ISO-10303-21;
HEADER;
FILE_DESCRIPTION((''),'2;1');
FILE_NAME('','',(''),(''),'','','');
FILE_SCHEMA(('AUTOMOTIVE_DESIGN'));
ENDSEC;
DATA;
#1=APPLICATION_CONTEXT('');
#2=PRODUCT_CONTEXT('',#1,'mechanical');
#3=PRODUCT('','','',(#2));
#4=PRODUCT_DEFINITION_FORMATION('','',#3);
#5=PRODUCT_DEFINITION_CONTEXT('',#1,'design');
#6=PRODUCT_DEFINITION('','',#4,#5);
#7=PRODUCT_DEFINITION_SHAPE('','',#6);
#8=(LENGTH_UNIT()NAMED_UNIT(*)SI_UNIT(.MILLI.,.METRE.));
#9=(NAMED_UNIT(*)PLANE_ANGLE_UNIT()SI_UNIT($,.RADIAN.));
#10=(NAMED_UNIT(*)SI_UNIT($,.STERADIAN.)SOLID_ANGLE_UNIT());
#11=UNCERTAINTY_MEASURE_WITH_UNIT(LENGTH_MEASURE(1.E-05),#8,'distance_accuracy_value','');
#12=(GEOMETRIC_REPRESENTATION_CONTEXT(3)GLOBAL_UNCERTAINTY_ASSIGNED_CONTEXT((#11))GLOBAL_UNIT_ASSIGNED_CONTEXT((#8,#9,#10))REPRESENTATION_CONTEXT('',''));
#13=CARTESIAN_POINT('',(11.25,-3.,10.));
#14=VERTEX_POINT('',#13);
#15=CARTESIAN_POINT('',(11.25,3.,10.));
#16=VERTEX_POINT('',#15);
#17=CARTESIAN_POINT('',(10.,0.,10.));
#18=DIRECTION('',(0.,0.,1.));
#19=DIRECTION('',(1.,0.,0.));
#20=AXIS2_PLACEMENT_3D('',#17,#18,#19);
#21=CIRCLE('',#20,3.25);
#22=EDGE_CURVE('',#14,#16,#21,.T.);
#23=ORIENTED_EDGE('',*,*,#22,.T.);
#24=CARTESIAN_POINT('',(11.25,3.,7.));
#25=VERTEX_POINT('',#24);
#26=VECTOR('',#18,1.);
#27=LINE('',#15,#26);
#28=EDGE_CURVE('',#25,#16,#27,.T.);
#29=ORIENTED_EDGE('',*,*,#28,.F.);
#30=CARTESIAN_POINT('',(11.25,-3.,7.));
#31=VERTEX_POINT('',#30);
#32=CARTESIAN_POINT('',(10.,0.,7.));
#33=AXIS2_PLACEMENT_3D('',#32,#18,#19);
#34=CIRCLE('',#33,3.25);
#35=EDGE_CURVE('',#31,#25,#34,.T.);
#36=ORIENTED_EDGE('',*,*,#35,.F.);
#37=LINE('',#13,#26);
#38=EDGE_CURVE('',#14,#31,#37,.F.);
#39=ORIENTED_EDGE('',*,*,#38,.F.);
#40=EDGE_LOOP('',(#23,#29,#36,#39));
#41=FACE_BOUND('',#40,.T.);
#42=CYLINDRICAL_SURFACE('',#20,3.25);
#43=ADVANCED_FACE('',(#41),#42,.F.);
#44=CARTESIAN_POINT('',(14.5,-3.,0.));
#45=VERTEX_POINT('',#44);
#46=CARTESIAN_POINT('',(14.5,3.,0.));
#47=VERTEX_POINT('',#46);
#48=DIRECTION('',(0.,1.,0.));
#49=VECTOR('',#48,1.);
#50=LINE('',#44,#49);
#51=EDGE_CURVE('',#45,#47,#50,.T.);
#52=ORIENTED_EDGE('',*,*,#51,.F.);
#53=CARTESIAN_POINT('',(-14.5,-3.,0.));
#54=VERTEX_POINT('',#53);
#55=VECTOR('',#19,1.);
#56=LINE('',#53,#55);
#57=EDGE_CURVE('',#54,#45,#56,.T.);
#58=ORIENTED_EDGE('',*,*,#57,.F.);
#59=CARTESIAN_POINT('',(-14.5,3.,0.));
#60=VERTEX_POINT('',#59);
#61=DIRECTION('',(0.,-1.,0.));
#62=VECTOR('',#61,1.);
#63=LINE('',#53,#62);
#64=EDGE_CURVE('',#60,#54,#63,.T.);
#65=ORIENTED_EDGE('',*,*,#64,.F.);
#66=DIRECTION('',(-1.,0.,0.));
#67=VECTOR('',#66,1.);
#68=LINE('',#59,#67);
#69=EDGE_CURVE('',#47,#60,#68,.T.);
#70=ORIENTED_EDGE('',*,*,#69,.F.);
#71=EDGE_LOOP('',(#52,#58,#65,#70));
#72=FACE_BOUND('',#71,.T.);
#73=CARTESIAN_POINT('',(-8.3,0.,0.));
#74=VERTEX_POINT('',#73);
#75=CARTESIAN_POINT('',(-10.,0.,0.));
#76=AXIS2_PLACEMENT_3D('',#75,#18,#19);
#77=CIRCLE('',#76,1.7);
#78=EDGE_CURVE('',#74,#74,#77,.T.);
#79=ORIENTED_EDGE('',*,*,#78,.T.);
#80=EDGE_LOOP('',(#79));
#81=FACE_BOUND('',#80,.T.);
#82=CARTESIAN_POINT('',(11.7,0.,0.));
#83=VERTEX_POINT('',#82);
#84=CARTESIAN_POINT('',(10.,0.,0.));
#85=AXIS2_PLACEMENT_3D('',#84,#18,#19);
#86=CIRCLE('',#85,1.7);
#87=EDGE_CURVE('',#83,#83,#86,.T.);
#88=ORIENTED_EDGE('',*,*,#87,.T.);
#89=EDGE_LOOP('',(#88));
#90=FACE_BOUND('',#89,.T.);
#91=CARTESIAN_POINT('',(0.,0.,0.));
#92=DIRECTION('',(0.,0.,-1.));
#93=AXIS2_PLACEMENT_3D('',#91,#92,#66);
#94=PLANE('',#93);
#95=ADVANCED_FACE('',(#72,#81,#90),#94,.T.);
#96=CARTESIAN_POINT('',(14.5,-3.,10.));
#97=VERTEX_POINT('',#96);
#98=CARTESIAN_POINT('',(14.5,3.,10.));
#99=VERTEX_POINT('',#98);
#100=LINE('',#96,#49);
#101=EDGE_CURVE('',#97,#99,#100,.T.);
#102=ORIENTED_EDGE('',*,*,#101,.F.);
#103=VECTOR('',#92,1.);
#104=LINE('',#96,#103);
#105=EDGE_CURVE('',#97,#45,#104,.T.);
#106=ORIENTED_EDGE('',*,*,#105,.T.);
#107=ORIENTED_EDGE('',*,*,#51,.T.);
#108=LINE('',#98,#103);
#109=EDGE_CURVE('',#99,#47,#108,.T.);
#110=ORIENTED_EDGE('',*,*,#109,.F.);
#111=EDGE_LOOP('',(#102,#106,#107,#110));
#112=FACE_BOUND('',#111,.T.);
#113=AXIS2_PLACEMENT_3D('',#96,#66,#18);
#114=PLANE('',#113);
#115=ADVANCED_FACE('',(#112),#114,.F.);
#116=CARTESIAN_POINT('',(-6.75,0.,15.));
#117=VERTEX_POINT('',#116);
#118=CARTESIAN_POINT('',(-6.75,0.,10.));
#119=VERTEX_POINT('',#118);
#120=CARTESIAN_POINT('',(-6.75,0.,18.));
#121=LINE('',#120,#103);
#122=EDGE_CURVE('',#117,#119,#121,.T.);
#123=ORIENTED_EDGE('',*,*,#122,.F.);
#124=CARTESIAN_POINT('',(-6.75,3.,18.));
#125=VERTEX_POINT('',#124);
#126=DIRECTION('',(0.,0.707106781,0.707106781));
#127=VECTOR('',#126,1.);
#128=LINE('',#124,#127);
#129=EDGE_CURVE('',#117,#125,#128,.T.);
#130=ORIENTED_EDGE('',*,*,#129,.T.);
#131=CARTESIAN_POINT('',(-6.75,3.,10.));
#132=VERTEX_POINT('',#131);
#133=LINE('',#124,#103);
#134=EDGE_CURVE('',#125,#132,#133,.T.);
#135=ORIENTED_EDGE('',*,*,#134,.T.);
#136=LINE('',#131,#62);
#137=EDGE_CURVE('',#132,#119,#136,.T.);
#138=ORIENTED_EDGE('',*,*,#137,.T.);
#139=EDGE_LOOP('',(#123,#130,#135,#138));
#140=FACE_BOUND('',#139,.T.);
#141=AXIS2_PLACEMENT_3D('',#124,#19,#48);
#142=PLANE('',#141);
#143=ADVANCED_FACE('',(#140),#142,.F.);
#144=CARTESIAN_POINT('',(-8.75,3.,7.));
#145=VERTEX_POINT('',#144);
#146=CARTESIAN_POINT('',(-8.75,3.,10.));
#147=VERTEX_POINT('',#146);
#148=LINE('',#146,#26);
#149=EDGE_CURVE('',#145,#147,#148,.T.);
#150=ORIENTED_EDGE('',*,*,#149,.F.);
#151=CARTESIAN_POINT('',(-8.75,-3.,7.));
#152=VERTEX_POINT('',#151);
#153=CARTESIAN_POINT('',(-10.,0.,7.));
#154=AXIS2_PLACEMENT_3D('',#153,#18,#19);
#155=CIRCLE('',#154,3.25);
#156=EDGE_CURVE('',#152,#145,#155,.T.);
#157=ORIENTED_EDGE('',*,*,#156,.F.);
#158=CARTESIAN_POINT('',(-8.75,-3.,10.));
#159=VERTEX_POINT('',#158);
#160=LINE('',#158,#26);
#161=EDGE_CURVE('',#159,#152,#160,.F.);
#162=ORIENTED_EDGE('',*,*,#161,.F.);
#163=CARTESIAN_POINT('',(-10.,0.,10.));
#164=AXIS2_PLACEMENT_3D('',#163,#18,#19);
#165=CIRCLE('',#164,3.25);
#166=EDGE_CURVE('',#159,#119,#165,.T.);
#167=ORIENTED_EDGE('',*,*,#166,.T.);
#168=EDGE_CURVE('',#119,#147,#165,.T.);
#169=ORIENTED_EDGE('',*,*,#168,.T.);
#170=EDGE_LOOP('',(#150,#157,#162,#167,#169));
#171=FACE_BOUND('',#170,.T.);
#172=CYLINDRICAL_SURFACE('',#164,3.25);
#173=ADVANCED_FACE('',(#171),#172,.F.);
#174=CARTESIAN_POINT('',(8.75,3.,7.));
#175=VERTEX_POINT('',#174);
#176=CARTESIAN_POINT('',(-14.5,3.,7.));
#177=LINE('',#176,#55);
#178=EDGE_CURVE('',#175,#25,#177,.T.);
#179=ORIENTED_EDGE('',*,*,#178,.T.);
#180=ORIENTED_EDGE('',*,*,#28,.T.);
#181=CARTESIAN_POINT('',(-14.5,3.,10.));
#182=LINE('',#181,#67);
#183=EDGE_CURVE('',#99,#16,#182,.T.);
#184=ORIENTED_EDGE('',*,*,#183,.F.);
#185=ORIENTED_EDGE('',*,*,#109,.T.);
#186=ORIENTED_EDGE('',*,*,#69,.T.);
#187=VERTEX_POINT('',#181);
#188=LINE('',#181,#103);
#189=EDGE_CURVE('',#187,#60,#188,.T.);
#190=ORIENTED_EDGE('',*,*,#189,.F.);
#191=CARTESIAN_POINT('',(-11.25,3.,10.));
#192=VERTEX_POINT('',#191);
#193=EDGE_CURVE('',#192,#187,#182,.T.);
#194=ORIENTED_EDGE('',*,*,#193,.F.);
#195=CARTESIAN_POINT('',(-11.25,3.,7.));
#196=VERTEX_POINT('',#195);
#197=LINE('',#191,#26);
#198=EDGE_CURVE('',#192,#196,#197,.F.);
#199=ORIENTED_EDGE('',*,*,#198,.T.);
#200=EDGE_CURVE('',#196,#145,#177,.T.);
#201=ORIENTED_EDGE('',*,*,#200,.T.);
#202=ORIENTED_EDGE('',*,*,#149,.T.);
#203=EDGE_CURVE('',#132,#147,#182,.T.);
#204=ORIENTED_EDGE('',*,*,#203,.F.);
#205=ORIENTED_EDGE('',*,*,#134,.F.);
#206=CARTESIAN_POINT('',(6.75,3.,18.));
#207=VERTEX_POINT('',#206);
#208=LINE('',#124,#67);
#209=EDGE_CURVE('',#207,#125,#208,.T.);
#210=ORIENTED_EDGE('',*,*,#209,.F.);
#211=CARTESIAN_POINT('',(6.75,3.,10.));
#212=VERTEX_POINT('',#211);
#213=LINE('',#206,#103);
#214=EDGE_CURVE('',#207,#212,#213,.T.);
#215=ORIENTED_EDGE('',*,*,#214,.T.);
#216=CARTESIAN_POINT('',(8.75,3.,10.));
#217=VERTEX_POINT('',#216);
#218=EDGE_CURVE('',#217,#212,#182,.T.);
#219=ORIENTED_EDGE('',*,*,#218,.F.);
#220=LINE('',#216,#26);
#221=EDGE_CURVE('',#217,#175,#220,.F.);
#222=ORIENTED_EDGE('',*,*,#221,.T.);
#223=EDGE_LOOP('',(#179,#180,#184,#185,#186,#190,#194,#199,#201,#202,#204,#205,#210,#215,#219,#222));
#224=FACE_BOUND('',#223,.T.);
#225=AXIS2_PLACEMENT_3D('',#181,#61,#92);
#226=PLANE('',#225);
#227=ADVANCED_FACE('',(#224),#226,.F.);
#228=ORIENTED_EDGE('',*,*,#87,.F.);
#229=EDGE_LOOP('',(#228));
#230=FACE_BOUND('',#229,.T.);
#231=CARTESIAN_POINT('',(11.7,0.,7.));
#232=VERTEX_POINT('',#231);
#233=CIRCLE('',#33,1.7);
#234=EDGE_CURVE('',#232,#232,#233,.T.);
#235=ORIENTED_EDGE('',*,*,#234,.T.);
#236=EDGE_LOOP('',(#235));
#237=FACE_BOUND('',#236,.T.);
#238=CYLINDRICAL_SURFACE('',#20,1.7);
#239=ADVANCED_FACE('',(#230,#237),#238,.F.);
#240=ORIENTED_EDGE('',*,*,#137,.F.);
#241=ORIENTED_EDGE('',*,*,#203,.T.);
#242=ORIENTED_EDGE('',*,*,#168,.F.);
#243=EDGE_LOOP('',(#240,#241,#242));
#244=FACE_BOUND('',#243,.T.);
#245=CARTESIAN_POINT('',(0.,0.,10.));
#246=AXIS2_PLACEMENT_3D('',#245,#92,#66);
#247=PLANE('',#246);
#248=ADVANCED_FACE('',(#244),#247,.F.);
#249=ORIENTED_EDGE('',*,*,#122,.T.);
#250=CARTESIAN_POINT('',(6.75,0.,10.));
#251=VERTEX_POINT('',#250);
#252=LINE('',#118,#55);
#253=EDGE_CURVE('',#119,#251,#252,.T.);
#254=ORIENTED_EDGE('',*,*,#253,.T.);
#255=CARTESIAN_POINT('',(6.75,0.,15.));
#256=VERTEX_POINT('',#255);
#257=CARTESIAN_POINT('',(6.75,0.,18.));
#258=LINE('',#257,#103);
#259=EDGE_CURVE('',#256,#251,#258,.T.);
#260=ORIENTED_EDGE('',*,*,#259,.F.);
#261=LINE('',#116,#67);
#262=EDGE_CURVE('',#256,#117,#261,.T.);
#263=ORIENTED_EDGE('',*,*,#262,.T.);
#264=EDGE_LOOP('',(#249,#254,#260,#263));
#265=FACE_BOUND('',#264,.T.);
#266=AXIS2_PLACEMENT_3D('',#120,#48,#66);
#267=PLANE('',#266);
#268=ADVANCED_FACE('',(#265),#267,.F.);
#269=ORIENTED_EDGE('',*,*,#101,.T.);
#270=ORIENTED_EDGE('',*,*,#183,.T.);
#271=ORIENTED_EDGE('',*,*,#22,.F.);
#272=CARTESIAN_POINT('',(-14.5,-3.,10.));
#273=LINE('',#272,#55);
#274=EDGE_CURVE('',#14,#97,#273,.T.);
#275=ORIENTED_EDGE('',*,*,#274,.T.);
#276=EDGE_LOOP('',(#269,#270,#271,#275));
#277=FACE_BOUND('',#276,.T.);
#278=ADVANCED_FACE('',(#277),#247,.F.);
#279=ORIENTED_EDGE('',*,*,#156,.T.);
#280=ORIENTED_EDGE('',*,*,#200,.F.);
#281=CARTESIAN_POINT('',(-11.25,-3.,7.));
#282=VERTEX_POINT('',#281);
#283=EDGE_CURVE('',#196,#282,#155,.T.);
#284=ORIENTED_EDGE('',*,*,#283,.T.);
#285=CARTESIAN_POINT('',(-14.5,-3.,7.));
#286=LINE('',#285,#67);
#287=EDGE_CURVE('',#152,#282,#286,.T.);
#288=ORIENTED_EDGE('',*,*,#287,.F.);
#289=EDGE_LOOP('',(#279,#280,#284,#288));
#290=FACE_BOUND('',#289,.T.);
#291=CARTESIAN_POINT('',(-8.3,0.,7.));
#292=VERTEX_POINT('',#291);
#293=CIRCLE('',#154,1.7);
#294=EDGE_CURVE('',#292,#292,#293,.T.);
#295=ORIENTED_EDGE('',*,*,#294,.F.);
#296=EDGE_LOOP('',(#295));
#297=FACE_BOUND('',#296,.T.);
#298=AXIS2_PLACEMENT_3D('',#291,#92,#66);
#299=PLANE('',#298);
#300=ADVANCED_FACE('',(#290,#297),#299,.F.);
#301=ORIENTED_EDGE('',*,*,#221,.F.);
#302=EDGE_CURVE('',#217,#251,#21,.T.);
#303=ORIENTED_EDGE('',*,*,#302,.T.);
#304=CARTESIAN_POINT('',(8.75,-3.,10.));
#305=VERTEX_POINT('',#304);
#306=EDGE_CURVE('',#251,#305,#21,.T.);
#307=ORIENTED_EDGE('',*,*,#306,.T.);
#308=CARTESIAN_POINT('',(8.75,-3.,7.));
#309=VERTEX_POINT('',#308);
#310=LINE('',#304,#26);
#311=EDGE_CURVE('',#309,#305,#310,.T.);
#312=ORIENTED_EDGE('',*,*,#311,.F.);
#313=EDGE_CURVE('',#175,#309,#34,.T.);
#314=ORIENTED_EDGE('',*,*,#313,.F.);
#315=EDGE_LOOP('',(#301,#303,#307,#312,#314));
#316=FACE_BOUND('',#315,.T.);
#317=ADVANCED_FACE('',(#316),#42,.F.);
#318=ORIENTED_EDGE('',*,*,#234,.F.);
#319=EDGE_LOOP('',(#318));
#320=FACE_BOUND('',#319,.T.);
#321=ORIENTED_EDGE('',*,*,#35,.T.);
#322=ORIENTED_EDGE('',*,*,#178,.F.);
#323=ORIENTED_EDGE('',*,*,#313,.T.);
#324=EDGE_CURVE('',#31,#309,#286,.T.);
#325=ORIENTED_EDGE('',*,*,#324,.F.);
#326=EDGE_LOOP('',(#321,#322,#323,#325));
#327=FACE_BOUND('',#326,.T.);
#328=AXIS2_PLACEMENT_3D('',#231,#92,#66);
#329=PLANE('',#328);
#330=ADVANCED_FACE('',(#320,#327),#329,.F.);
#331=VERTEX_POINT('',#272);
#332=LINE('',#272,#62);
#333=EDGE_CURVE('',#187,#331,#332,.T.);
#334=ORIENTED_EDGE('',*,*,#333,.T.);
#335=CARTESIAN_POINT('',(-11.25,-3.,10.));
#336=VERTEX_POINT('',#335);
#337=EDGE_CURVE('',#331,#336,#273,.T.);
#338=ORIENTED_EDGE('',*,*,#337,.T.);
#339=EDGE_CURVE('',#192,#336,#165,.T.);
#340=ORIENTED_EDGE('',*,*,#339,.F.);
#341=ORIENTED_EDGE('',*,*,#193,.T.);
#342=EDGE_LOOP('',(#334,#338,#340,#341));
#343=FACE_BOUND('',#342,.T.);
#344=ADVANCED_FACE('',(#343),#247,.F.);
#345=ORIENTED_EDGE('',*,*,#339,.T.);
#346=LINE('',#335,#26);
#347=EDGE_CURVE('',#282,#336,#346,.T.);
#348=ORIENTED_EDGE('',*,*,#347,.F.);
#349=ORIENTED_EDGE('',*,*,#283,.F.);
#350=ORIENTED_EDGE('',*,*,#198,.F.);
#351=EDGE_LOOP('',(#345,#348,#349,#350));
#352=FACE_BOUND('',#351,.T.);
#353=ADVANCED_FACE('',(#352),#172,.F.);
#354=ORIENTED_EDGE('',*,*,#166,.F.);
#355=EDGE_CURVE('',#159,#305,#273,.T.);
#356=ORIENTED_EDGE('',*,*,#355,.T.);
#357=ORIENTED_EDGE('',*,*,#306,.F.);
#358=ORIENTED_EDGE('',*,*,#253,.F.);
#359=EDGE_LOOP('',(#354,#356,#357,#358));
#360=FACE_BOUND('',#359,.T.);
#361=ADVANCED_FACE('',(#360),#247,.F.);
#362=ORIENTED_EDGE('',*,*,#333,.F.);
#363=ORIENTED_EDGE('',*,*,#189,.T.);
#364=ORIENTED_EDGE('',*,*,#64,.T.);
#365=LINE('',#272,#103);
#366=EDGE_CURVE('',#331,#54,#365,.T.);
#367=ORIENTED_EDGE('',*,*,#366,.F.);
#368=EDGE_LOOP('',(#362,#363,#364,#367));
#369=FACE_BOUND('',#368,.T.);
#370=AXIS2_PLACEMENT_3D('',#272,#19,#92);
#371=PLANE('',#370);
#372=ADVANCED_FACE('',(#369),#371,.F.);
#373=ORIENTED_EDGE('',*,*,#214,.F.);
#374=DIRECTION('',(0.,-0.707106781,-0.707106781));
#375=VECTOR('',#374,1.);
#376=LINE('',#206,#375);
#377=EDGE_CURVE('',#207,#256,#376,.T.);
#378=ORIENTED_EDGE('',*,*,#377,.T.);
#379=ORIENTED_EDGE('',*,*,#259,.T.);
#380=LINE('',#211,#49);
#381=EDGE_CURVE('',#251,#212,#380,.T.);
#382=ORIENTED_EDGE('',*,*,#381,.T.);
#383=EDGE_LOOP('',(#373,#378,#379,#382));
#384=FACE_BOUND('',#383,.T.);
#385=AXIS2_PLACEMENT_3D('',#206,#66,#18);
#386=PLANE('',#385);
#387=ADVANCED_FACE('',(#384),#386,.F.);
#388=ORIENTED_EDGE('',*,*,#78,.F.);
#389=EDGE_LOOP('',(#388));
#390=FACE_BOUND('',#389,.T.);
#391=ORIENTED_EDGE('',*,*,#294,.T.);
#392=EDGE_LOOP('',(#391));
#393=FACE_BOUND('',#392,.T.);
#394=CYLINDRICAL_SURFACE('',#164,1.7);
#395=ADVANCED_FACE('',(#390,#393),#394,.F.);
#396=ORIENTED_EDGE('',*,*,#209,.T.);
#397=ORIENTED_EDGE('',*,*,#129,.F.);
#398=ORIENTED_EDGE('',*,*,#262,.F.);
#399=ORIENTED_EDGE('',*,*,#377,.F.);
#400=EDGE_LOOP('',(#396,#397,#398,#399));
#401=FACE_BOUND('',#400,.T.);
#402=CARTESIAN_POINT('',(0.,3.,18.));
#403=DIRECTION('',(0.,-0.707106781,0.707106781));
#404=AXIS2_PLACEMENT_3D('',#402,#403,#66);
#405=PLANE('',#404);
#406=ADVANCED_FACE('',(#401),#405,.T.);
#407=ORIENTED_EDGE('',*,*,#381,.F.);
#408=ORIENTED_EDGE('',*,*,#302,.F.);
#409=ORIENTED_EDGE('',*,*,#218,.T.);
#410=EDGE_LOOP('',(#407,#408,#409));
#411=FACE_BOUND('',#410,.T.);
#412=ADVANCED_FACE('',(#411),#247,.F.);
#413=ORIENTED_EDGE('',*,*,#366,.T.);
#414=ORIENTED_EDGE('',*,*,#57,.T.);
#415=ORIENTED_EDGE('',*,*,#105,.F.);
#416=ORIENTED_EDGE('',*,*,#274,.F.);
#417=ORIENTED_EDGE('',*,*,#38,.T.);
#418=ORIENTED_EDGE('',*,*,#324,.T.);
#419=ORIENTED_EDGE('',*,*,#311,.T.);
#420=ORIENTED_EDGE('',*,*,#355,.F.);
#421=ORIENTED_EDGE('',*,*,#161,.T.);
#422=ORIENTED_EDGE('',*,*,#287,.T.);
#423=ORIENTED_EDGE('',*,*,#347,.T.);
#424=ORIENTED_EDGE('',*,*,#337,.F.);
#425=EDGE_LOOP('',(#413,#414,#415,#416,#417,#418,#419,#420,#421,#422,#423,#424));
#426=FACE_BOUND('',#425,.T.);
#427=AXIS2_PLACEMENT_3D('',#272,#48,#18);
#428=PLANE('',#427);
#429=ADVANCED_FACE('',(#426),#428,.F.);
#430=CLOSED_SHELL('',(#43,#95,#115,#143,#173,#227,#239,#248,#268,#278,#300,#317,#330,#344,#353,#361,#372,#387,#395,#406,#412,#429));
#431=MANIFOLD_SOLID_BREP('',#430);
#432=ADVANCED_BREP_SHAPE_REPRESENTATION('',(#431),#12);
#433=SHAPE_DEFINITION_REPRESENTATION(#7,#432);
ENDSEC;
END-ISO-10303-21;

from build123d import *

# Parameters (mm, degrees)
SKETCH1_W                      = 29
SKETCH1_H                      = 6
BOSS_EXTRUDE1_DEPTH            = 10
SKETCH5_W                      = 13.5
SKETCH5_H                      = 3
BOSS_EXTRUDE2_DEPTH            = 8
CBORE_FOR_M3_SHCS1_D           = 3.4
CBORE_FOR_M3_SHCS1_CBORE_D     = 6.5
CBORE_FOR_M3_SHCS1_CBORE_DEPTH = 3
CHAMFER1_SIZE                  = 3


with BuildPart() as part:
    # Sketch1 → Boss-Extrude1 (new body)
    with BuildSketch(Plane.XY):
        Rectangle(SKETCH1_W, SKETCH1_H)
    extrude(amount=BOSS_EXTRUDE1_DEPTH)

    # Sketch5 → Boss-Extrude2 (add)
    with BuildSketch(Plane.XY.offset(10)):
        with Locations((0, 1.5)):
            Rectangle(SKETCH5_W, SKETCH5_H)
    extrude(amount=BOSS_EXTRUDE2_DEPTH)

    # CBORE for M3 SHCS1 (through all)
    with Locations(Plane.XY.offset(10)):
        with Locations((-10, 0), (10, 0)):
            CounterBoreHole(CBORE_FOR_M3_SHCS1_D / 2, CBORE_FOR_M3_SHCS1_CBORE_D / 2, CBORE_FOR_M3_SHCS1_CBORE_DEPTH)

    # Chamfer1
    chamfer1_edges = [part.edges().sort_by_distance(p)[0] for p in [
        (0, 0, 18),
    ]]
    chamfer(chamfer1_edges, length=CHAMFER1_SIZE - 0.0001)  # a hair under: the kernel refuses the full size


solid = part.part
